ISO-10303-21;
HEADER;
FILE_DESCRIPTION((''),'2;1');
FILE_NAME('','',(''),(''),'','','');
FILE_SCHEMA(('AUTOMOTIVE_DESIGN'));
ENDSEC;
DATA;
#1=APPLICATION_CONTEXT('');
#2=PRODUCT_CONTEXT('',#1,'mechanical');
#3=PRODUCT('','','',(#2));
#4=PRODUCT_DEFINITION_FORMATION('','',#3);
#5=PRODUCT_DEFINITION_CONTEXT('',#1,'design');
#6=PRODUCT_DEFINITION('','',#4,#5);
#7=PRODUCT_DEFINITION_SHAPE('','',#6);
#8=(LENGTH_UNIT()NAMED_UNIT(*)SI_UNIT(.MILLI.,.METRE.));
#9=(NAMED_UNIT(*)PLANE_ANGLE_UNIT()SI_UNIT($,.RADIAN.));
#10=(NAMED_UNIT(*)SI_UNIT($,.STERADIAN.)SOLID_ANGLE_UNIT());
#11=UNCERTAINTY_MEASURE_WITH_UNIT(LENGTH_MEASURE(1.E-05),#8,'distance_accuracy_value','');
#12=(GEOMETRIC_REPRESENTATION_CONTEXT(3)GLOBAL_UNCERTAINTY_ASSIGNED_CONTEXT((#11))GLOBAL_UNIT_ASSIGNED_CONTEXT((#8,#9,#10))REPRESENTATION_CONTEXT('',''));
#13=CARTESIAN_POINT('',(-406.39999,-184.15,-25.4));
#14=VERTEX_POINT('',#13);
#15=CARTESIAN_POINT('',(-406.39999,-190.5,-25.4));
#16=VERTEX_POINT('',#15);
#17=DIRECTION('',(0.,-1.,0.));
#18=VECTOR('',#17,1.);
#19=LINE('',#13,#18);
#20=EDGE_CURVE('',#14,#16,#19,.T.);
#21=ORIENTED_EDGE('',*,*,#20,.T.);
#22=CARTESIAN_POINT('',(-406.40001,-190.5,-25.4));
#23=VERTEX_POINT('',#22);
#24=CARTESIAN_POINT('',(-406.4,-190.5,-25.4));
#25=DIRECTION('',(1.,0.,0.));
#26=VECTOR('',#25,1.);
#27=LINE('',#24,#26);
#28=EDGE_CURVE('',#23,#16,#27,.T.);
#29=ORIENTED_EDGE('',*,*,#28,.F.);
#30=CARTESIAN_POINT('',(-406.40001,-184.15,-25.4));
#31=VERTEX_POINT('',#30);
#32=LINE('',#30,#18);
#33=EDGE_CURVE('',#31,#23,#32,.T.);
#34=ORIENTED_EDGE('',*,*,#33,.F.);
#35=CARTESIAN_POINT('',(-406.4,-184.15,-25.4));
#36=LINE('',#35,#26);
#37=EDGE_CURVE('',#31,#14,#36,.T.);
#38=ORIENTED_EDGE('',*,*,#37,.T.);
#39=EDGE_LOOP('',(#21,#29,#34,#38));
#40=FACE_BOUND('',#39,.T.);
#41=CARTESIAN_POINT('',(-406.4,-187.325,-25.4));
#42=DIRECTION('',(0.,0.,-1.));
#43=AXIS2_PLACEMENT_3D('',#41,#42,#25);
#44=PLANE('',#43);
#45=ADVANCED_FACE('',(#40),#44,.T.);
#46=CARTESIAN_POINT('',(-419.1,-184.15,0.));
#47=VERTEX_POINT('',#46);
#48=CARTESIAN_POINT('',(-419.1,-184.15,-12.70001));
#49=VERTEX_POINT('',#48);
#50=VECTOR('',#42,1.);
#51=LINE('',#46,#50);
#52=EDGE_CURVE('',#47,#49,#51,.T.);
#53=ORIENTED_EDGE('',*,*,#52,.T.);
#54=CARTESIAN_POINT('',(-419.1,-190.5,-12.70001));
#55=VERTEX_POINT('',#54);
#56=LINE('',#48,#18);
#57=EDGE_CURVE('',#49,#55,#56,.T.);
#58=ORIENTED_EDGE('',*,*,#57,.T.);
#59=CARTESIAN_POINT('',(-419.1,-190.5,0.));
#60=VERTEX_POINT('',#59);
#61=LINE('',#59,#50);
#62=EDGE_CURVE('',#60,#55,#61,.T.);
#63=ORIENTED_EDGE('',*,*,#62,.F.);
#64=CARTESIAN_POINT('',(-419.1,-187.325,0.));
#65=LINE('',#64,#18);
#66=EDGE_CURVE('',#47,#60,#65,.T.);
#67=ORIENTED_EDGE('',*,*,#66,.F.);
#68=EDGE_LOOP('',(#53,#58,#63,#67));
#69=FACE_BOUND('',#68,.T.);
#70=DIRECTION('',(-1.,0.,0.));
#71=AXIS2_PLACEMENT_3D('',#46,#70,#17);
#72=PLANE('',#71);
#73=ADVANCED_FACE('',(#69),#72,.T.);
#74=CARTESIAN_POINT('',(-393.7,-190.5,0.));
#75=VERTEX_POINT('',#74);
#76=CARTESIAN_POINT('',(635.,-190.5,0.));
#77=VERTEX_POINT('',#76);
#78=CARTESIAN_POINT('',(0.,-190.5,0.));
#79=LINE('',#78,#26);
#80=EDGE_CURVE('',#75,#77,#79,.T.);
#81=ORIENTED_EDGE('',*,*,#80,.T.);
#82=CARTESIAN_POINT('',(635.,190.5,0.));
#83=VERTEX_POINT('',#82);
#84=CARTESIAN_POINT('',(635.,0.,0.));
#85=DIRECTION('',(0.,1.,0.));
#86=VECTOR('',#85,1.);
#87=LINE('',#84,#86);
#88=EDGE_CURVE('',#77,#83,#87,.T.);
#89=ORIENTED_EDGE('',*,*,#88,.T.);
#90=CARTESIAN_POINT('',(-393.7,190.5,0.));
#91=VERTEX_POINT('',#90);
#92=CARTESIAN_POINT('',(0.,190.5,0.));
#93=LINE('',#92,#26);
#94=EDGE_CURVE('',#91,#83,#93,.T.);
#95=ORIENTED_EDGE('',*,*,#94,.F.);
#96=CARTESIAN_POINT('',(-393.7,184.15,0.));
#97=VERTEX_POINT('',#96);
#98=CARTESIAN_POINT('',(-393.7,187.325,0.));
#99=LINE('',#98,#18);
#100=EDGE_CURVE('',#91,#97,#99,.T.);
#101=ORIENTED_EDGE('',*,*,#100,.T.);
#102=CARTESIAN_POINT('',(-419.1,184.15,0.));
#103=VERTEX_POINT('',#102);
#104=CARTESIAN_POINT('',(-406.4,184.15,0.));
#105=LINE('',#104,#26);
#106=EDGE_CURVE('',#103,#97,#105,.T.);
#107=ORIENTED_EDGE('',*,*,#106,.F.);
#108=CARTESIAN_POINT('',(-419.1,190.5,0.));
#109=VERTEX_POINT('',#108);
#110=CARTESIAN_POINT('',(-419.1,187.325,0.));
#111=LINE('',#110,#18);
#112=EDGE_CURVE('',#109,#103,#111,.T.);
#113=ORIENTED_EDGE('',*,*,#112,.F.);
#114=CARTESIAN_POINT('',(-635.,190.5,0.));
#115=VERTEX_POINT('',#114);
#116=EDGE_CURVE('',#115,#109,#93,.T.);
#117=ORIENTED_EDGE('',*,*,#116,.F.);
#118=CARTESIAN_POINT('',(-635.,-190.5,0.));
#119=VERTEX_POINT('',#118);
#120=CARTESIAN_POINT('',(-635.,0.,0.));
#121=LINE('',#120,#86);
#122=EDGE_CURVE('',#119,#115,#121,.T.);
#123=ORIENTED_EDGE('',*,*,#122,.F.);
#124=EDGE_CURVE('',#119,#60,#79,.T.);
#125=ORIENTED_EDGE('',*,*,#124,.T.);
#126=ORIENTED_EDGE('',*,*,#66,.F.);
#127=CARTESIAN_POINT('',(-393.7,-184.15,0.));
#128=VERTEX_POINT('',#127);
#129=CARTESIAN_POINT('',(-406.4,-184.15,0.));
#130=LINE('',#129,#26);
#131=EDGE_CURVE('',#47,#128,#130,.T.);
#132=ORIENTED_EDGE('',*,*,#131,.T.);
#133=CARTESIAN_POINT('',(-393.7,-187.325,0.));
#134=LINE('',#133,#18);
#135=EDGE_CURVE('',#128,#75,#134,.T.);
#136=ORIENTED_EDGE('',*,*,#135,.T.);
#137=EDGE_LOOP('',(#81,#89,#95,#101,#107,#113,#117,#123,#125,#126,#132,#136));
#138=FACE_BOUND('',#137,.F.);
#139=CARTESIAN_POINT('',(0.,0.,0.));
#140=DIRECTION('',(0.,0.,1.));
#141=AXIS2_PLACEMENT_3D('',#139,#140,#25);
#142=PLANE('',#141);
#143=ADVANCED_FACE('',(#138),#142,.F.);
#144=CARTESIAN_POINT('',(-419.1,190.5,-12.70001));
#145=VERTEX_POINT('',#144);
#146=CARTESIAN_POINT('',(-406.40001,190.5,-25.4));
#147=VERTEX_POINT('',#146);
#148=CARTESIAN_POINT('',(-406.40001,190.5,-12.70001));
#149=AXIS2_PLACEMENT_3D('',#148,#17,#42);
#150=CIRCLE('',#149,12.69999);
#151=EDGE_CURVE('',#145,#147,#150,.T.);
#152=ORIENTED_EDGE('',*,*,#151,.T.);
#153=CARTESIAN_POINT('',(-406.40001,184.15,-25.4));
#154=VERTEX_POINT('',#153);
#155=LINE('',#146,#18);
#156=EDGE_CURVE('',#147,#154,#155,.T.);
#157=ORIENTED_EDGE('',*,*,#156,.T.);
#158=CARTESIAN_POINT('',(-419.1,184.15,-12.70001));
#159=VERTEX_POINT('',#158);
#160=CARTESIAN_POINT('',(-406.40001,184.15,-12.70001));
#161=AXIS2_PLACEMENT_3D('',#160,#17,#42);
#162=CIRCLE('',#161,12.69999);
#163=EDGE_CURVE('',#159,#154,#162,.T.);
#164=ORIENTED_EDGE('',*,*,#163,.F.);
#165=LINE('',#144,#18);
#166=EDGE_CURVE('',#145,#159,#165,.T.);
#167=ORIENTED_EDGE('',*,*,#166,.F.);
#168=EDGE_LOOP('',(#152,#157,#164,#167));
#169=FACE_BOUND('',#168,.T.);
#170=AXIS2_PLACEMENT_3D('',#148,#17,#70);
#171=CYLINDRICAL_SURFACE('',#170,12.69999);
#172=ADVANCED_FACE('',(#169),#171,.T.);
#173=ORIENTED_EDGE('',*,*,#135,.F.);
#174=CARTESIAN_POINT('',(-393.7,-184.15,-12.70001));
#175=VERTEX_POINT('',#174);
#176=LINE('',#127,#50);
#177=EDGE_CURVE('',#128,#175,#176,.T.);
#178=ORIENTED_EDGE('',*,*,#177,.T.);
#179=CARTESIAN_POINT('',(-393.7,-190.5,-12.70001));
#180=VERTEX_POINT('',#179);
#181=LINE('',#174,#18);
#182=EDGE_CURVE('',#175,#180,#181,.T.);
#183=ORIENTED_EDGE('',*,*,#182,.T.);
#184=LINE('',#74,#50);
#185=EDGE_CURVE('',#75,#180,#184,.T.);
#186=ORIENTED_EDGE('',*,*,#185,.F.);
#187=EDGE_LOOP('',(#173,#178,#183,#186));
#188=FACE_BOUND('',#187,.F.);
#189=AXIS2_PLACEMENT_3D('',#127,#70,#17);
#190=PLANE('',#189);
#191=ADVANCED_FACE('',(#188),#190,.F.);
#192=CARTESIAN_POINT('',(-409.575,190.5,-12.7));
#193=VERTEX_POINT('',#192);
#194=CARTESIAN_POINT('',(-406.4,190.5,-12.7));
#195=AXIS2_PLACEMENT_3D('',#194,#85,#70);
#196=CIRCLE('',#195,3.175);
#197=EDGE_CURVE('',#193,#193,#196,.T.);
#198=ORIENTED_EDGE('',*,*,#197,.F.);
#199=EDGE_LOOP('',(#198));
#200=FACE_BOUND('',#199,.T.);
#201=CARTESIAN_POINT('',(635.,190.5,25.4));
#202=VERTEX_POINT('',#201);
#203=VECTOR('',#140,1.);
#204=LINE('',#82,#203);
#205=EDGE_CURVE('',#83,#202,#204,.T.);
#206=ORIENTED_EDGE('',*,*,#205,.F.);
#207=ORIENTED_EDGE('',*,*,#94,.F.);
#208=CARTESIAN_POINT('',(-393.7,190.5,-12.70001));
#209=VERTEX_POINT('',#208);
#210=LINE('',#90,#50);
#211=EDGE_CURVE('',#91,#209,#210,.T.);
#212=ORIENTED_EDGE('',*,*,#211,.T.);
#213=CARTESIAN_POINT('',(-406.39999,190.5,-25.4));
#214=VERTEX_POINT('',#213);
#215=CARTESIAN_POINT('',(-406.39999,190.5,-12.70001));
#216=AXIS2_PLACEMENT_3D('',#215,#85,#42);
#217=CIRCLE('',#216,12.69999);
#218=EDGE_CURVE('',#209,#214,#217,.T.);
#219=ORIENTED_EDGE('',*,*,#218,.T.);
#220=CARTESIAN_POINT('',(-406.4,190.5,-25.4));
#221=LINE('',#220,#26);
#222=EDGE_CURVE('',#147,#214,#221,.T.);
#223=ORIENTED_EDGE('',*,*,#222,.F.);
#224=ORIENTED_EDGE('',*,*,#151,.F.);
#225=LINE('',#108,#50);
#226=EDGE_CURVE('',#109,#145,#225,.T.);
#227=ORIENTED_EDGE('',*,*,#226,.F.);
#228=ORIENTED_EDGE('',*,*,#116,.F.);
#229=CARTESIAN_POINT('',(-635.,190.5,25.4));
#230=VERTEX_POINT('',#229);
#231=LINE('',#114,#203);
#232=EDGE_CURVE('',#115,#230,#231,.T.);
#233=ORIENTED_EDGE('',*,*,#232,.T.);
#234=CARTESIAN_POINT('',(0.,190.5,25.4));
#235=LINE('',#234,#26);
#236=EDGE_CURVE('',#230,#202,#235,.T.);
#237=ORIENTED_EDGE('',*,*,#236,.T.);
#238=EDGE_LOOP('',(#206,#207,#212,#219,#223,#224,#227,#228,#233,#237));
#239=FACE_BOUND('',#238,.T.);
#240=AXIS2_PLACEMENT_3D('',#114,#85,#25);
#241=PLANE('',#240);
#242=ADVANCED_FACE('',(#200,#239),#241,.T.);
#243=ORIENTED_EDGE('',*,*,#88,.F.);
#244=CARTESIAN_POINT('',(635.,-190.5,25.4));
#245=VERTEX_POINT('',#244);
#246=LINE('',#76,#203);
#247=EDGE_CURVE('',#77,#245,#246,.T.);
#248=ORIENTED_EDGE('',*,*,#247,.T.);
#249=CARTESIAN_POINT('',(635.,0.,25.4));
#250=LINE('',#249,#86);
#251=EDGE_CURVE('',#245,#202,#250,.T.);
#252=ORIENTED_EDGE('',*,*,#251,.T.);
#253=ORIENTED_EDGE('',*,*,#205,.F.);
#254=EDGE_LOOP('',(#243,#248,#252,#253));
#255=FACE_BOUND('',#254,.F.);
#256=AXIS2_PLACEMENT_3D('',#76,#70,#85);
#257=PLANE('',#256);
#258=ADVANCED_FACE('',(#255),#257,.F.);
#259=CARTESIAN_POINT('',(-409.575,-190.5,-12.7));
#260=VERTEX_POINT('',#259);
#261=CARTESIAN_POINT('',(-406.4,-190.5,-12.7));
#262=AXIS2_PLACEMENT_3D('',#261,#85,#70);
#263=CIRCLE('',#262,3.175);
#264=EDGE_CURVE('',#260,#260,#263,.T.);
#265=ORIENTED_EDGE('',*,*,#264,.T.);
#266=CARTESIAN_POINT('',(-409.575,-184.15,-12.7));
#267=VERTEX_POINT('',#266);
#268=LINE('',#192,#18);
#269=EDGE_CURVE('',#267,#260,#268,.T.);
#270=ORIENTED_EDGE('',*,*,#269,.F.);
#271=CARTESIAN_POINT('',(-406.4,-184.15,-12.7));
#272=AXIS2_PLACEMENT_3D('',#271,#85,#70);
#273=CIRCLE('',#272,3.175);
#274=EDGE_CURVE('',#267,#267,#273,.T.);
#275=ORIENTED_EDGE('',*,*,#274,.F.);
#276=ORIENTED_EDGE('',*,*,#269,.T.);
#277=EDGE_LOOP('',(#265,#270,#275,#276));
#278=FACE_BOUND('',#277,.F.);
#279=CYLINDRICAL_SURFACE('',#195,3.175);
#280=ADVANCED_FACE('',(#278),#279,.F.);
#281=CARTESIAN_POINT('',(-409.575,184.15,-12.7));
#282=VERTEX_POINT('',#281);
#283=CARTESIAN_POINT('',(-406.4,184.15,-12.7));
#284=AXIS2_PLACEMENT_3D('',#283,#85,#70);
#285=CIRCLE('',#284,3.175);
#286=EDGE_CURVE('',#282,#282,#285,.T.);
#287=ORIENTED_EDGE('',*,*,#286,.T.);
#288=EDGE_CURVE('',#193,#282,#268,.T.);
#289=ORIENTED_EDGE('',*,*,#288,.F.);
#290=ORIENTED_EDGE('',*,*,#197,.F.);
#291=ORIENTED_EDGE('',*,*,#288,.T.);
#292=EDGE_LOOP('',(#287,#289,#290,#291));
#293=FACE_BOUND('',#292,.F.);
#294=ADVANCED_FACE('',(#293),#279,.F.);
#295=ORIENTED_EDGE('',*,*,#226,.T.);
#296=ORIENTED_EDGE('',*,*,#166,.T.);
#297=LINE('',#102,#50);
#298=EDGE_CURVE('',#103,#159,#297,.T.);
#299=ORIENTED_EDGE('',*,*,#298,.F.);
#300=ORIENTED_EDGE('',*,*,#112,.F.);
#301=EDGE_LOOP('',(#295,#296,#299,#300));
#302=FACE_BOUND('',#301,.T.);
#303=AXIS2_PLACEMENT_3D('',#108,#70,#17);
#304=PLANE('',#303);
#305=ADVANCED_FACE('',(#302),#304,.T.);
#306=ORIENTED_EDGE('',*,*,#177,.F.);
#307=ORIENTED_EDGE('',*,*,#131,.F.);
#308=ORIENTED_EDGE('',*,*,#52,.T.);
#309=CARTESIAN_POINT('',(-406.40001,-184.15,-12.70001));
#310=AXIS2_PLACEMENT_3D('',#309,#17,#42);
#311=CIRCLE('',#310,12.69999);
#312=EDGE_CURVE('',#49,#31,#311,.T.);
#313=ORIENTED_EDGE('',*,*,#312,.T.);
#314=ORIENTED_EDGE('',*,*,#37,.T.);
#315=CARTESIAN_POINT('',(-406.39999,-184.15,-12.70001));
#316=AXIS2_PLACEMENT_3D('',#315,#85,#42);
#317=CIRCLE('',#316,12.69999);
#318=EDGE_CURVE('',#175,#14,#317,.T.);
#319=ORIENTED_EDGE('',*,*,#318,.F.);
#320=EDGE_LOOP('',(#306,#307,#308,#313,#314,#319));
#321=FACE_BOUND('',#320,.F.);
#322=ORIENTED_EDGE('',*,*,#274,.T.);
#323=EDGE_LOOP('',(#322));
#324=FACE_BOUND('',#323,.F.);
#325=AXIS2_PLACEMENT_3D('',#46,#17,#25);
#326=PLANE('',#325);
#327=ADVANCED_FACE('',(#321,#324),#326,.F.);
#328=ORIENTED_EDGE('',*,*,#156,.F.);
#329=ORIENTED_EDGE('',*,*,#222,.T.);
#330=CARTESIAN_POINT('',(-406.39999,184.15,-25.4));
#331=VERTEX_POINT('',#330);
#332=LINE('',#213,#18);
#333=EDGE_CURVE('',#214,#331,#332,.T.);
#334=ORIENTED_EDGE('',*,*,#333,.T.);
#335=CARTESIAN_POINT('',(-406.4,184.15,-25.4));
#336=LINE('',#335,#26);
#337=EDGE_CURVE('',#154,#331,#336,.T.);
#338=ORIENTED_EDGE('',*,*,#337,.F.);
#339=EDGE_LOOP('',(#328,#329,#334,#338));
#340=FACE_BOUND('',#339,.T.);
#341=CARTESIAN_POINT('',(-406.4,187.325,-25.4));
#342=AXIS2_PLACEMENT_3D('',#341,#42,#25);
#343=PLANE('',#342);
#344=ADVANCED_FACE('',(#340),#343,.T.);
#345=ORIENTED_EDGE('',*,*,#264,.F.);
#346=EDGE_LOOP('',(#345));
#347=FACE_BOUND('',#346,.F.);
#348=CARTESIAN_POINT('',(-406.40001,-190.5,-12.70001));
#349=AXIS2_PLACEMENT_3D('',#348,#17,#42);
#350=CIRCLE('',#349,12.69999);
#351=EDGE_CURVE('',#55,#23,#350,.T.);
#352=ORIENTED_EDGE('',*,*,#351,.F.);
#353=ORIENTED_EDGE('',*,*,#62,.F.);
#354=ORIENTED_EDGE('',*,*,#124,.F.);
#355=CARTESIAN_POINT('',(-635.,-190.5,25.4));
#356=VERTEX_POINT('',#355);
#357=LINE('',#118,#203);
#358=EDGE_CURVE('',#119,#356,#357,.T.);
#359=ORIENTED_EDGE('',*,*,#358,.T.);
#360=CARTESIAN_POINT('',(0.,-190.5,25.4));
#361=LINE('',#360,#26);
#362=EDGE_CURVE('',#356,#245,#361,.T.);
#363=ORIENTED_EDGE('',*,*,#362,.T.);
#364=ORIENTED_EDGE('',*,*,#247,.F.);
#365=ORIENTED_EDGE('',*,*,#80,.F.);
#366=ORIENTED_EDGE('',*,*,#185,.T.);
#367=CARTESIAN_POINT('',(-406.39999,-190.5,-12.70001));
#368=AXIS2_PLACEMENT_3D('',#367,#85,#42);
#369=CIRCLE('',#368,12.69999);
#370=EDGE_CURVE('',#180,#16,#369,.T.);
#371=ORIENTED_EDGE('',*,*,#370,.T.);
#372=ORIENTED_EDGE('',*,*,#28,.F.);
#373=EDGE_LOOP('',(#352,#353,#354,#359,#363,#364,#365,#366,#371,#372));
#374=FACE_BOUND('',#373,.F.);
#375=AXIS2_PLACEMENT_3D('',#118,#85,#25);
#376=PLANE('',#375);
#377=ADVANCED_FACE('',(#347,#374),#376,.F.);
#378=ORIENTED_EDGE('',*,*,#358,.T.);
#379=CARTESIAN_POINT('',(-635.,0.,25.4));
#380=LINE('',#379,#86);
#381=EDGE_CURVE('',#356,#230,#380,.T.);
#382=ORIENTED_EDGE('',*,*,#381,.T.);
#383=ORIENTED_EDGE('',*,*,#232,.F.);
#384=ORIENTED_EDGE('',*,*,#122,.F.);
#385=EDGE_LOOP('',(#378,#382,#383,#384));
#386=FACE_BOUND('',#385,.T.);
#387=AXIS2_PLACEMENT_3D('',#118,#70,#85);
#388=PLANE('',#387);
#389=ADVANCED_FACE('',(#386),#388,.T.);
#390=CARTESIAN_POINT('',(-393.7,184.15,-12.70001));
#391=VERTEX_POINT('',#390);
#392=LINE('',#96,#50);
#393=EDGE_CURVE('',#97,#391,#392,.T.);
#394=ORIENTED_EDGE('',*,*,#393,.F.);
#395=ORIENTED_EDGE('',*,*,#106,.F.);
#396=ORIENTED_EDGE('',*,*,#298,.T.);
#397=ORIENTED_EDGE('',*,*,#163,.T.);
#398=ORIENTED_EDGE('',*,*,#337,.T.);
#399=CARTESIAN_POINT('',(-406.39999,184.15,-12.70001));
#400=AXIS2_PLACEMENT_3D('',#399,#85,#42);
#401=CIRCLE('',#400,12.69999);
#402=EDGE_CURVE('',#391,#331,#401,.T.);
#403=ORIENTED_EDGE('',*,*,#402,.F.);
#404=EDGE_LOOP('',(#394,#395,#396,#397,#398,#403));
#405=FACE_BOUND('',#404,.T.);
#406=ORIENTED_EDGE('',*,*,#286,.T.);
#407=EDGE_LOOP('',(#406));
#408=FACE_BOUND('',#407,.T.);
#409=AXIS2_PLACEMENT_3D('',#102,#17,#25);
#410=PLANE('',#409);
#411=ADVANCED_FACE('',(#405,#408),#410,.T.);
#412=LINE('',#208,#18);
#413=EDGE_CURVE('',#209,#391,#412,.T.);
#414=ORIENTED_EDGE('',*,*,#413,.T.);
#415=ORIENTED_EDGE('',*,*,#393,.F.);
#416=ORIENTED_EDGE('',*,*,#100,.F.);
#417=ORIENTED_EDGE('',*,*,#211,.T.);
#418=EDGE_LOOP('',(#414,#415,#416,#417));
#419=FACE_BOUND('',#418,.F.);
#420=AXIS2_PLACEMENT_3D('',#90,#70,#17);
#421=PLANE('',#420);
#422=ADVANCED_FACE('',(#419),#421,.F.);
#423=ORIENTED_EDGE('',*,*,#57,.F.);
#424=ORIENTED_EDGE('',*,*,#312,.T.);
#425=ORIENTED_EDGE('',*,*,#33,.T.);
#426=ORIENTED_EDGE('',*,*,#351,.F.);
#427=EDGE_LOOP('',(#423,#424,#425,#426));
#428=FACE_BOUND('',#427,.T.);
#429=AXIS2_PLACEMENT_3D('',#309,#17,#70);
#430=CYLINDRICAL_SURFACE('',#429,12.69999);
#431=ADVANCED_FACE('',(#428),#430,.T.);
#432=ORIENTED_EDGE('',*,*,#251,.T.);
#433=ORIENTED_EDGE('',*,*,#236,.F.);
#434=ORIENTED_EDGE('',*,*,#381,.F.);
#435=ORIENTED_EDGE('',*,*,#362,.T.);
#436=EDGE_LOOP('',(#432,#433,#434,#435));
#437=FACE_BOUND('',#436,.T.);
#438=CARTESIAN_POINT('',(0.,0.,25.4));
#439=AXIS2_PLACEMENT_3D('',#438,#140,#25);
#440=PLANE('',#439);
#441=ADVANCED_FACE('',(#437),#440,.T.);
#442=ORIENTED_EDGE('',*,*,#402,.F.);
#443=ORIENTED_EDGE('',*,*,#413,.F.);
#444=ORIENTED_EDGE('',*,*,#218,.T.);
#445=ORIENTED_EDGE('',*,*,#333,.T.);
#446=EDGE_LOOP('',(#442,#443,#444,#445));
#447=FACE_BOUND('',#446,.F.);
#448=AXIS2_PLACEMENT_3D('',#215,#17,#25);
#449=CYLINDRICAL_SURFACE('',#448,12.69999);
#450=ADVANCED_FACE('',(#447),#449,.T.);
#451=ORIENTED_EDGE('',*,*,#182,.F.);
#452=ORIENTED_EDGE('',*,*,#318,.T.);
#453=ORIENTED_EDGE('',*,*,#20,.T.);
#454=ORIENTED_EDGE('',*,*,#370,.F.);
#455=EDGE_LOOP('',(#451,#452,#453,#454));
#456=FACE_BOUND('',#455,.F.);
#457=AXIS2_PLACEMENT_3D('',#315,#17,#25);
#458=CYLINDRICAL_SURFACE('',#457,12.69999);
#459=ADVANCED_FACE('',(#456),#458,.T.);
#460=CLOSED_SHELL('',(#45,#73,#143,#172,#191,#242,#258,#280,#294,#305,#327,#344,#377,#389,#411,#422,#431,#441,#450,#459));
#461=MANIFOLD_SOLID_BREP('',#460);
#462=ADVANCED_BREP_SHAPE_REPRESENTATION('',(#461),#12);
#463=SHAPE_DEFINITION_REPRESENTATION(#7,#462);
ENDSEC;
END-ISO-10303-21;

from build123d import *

# Parameters (mm, degrees)
F0_W     = 1270
F0_H     = 381
F1_DEPTH = 25.4
F2_W     = 25.4
F2_H     = 6.35
F3_DEPTH = 25.4
F4_R     = 12.69999
F5_R     = 3.175
F6_DEPTH = 381.001


# Not quite as in the source:
# - a fillet or chamfer is up to 0.001 mm smaller than in the source, because OpenCascade refuses the exact size


with BuildPart() as f1:
    # F0 (on Top) → F1 (new body)
    with BuildSketch(Plane.XY):
        Rectangle(F0_W, F0_H)
    extrude(amount=F1_DEPTH)

    # F2 (on face) → F3 (join)
    with BuildSketch(Plane(origin=(0, 0, 0), x_dir=(1, 0, 0), z_dir=(0, 0, -1))):
        with Locations((-406.4, 187.325)):
            Rectangle(F2_W, F2_H)
        with Locations((-406.4, -187.325)):
            Rectangle(F2_W, F2_H)
    extrude(amount=F3_DEPTH)

    # F4 (radius 12.7 in the source; OpenCascade refuses exactly that, so slightly less here)
    f4_edges = [f1.edges().sort_by_distance(p)[0] for p in [
        (-419.1, -187.325, -25.4),
        (-393.7, -187.325, -25.4),
        (-419.1, 187.325, -25.4),
        (-393.7, 187.325, -25.4),
    ]]
    fillet(f4_edges, radius=F4_R)

    # F5 (on face) → F6 (cut, through all)
    with BuildSketch(Plane(origin=(0, 190.5, 0), x_dir=(-1, 0, 0), z_dir=(0, 1, 0))):
        with Locations((406.4, -12.7)):
            Circle(F5_R)
    extrude(amount=-F6_DEPTH, mode=Mode.SUBTRACT)


solid = f1.part
